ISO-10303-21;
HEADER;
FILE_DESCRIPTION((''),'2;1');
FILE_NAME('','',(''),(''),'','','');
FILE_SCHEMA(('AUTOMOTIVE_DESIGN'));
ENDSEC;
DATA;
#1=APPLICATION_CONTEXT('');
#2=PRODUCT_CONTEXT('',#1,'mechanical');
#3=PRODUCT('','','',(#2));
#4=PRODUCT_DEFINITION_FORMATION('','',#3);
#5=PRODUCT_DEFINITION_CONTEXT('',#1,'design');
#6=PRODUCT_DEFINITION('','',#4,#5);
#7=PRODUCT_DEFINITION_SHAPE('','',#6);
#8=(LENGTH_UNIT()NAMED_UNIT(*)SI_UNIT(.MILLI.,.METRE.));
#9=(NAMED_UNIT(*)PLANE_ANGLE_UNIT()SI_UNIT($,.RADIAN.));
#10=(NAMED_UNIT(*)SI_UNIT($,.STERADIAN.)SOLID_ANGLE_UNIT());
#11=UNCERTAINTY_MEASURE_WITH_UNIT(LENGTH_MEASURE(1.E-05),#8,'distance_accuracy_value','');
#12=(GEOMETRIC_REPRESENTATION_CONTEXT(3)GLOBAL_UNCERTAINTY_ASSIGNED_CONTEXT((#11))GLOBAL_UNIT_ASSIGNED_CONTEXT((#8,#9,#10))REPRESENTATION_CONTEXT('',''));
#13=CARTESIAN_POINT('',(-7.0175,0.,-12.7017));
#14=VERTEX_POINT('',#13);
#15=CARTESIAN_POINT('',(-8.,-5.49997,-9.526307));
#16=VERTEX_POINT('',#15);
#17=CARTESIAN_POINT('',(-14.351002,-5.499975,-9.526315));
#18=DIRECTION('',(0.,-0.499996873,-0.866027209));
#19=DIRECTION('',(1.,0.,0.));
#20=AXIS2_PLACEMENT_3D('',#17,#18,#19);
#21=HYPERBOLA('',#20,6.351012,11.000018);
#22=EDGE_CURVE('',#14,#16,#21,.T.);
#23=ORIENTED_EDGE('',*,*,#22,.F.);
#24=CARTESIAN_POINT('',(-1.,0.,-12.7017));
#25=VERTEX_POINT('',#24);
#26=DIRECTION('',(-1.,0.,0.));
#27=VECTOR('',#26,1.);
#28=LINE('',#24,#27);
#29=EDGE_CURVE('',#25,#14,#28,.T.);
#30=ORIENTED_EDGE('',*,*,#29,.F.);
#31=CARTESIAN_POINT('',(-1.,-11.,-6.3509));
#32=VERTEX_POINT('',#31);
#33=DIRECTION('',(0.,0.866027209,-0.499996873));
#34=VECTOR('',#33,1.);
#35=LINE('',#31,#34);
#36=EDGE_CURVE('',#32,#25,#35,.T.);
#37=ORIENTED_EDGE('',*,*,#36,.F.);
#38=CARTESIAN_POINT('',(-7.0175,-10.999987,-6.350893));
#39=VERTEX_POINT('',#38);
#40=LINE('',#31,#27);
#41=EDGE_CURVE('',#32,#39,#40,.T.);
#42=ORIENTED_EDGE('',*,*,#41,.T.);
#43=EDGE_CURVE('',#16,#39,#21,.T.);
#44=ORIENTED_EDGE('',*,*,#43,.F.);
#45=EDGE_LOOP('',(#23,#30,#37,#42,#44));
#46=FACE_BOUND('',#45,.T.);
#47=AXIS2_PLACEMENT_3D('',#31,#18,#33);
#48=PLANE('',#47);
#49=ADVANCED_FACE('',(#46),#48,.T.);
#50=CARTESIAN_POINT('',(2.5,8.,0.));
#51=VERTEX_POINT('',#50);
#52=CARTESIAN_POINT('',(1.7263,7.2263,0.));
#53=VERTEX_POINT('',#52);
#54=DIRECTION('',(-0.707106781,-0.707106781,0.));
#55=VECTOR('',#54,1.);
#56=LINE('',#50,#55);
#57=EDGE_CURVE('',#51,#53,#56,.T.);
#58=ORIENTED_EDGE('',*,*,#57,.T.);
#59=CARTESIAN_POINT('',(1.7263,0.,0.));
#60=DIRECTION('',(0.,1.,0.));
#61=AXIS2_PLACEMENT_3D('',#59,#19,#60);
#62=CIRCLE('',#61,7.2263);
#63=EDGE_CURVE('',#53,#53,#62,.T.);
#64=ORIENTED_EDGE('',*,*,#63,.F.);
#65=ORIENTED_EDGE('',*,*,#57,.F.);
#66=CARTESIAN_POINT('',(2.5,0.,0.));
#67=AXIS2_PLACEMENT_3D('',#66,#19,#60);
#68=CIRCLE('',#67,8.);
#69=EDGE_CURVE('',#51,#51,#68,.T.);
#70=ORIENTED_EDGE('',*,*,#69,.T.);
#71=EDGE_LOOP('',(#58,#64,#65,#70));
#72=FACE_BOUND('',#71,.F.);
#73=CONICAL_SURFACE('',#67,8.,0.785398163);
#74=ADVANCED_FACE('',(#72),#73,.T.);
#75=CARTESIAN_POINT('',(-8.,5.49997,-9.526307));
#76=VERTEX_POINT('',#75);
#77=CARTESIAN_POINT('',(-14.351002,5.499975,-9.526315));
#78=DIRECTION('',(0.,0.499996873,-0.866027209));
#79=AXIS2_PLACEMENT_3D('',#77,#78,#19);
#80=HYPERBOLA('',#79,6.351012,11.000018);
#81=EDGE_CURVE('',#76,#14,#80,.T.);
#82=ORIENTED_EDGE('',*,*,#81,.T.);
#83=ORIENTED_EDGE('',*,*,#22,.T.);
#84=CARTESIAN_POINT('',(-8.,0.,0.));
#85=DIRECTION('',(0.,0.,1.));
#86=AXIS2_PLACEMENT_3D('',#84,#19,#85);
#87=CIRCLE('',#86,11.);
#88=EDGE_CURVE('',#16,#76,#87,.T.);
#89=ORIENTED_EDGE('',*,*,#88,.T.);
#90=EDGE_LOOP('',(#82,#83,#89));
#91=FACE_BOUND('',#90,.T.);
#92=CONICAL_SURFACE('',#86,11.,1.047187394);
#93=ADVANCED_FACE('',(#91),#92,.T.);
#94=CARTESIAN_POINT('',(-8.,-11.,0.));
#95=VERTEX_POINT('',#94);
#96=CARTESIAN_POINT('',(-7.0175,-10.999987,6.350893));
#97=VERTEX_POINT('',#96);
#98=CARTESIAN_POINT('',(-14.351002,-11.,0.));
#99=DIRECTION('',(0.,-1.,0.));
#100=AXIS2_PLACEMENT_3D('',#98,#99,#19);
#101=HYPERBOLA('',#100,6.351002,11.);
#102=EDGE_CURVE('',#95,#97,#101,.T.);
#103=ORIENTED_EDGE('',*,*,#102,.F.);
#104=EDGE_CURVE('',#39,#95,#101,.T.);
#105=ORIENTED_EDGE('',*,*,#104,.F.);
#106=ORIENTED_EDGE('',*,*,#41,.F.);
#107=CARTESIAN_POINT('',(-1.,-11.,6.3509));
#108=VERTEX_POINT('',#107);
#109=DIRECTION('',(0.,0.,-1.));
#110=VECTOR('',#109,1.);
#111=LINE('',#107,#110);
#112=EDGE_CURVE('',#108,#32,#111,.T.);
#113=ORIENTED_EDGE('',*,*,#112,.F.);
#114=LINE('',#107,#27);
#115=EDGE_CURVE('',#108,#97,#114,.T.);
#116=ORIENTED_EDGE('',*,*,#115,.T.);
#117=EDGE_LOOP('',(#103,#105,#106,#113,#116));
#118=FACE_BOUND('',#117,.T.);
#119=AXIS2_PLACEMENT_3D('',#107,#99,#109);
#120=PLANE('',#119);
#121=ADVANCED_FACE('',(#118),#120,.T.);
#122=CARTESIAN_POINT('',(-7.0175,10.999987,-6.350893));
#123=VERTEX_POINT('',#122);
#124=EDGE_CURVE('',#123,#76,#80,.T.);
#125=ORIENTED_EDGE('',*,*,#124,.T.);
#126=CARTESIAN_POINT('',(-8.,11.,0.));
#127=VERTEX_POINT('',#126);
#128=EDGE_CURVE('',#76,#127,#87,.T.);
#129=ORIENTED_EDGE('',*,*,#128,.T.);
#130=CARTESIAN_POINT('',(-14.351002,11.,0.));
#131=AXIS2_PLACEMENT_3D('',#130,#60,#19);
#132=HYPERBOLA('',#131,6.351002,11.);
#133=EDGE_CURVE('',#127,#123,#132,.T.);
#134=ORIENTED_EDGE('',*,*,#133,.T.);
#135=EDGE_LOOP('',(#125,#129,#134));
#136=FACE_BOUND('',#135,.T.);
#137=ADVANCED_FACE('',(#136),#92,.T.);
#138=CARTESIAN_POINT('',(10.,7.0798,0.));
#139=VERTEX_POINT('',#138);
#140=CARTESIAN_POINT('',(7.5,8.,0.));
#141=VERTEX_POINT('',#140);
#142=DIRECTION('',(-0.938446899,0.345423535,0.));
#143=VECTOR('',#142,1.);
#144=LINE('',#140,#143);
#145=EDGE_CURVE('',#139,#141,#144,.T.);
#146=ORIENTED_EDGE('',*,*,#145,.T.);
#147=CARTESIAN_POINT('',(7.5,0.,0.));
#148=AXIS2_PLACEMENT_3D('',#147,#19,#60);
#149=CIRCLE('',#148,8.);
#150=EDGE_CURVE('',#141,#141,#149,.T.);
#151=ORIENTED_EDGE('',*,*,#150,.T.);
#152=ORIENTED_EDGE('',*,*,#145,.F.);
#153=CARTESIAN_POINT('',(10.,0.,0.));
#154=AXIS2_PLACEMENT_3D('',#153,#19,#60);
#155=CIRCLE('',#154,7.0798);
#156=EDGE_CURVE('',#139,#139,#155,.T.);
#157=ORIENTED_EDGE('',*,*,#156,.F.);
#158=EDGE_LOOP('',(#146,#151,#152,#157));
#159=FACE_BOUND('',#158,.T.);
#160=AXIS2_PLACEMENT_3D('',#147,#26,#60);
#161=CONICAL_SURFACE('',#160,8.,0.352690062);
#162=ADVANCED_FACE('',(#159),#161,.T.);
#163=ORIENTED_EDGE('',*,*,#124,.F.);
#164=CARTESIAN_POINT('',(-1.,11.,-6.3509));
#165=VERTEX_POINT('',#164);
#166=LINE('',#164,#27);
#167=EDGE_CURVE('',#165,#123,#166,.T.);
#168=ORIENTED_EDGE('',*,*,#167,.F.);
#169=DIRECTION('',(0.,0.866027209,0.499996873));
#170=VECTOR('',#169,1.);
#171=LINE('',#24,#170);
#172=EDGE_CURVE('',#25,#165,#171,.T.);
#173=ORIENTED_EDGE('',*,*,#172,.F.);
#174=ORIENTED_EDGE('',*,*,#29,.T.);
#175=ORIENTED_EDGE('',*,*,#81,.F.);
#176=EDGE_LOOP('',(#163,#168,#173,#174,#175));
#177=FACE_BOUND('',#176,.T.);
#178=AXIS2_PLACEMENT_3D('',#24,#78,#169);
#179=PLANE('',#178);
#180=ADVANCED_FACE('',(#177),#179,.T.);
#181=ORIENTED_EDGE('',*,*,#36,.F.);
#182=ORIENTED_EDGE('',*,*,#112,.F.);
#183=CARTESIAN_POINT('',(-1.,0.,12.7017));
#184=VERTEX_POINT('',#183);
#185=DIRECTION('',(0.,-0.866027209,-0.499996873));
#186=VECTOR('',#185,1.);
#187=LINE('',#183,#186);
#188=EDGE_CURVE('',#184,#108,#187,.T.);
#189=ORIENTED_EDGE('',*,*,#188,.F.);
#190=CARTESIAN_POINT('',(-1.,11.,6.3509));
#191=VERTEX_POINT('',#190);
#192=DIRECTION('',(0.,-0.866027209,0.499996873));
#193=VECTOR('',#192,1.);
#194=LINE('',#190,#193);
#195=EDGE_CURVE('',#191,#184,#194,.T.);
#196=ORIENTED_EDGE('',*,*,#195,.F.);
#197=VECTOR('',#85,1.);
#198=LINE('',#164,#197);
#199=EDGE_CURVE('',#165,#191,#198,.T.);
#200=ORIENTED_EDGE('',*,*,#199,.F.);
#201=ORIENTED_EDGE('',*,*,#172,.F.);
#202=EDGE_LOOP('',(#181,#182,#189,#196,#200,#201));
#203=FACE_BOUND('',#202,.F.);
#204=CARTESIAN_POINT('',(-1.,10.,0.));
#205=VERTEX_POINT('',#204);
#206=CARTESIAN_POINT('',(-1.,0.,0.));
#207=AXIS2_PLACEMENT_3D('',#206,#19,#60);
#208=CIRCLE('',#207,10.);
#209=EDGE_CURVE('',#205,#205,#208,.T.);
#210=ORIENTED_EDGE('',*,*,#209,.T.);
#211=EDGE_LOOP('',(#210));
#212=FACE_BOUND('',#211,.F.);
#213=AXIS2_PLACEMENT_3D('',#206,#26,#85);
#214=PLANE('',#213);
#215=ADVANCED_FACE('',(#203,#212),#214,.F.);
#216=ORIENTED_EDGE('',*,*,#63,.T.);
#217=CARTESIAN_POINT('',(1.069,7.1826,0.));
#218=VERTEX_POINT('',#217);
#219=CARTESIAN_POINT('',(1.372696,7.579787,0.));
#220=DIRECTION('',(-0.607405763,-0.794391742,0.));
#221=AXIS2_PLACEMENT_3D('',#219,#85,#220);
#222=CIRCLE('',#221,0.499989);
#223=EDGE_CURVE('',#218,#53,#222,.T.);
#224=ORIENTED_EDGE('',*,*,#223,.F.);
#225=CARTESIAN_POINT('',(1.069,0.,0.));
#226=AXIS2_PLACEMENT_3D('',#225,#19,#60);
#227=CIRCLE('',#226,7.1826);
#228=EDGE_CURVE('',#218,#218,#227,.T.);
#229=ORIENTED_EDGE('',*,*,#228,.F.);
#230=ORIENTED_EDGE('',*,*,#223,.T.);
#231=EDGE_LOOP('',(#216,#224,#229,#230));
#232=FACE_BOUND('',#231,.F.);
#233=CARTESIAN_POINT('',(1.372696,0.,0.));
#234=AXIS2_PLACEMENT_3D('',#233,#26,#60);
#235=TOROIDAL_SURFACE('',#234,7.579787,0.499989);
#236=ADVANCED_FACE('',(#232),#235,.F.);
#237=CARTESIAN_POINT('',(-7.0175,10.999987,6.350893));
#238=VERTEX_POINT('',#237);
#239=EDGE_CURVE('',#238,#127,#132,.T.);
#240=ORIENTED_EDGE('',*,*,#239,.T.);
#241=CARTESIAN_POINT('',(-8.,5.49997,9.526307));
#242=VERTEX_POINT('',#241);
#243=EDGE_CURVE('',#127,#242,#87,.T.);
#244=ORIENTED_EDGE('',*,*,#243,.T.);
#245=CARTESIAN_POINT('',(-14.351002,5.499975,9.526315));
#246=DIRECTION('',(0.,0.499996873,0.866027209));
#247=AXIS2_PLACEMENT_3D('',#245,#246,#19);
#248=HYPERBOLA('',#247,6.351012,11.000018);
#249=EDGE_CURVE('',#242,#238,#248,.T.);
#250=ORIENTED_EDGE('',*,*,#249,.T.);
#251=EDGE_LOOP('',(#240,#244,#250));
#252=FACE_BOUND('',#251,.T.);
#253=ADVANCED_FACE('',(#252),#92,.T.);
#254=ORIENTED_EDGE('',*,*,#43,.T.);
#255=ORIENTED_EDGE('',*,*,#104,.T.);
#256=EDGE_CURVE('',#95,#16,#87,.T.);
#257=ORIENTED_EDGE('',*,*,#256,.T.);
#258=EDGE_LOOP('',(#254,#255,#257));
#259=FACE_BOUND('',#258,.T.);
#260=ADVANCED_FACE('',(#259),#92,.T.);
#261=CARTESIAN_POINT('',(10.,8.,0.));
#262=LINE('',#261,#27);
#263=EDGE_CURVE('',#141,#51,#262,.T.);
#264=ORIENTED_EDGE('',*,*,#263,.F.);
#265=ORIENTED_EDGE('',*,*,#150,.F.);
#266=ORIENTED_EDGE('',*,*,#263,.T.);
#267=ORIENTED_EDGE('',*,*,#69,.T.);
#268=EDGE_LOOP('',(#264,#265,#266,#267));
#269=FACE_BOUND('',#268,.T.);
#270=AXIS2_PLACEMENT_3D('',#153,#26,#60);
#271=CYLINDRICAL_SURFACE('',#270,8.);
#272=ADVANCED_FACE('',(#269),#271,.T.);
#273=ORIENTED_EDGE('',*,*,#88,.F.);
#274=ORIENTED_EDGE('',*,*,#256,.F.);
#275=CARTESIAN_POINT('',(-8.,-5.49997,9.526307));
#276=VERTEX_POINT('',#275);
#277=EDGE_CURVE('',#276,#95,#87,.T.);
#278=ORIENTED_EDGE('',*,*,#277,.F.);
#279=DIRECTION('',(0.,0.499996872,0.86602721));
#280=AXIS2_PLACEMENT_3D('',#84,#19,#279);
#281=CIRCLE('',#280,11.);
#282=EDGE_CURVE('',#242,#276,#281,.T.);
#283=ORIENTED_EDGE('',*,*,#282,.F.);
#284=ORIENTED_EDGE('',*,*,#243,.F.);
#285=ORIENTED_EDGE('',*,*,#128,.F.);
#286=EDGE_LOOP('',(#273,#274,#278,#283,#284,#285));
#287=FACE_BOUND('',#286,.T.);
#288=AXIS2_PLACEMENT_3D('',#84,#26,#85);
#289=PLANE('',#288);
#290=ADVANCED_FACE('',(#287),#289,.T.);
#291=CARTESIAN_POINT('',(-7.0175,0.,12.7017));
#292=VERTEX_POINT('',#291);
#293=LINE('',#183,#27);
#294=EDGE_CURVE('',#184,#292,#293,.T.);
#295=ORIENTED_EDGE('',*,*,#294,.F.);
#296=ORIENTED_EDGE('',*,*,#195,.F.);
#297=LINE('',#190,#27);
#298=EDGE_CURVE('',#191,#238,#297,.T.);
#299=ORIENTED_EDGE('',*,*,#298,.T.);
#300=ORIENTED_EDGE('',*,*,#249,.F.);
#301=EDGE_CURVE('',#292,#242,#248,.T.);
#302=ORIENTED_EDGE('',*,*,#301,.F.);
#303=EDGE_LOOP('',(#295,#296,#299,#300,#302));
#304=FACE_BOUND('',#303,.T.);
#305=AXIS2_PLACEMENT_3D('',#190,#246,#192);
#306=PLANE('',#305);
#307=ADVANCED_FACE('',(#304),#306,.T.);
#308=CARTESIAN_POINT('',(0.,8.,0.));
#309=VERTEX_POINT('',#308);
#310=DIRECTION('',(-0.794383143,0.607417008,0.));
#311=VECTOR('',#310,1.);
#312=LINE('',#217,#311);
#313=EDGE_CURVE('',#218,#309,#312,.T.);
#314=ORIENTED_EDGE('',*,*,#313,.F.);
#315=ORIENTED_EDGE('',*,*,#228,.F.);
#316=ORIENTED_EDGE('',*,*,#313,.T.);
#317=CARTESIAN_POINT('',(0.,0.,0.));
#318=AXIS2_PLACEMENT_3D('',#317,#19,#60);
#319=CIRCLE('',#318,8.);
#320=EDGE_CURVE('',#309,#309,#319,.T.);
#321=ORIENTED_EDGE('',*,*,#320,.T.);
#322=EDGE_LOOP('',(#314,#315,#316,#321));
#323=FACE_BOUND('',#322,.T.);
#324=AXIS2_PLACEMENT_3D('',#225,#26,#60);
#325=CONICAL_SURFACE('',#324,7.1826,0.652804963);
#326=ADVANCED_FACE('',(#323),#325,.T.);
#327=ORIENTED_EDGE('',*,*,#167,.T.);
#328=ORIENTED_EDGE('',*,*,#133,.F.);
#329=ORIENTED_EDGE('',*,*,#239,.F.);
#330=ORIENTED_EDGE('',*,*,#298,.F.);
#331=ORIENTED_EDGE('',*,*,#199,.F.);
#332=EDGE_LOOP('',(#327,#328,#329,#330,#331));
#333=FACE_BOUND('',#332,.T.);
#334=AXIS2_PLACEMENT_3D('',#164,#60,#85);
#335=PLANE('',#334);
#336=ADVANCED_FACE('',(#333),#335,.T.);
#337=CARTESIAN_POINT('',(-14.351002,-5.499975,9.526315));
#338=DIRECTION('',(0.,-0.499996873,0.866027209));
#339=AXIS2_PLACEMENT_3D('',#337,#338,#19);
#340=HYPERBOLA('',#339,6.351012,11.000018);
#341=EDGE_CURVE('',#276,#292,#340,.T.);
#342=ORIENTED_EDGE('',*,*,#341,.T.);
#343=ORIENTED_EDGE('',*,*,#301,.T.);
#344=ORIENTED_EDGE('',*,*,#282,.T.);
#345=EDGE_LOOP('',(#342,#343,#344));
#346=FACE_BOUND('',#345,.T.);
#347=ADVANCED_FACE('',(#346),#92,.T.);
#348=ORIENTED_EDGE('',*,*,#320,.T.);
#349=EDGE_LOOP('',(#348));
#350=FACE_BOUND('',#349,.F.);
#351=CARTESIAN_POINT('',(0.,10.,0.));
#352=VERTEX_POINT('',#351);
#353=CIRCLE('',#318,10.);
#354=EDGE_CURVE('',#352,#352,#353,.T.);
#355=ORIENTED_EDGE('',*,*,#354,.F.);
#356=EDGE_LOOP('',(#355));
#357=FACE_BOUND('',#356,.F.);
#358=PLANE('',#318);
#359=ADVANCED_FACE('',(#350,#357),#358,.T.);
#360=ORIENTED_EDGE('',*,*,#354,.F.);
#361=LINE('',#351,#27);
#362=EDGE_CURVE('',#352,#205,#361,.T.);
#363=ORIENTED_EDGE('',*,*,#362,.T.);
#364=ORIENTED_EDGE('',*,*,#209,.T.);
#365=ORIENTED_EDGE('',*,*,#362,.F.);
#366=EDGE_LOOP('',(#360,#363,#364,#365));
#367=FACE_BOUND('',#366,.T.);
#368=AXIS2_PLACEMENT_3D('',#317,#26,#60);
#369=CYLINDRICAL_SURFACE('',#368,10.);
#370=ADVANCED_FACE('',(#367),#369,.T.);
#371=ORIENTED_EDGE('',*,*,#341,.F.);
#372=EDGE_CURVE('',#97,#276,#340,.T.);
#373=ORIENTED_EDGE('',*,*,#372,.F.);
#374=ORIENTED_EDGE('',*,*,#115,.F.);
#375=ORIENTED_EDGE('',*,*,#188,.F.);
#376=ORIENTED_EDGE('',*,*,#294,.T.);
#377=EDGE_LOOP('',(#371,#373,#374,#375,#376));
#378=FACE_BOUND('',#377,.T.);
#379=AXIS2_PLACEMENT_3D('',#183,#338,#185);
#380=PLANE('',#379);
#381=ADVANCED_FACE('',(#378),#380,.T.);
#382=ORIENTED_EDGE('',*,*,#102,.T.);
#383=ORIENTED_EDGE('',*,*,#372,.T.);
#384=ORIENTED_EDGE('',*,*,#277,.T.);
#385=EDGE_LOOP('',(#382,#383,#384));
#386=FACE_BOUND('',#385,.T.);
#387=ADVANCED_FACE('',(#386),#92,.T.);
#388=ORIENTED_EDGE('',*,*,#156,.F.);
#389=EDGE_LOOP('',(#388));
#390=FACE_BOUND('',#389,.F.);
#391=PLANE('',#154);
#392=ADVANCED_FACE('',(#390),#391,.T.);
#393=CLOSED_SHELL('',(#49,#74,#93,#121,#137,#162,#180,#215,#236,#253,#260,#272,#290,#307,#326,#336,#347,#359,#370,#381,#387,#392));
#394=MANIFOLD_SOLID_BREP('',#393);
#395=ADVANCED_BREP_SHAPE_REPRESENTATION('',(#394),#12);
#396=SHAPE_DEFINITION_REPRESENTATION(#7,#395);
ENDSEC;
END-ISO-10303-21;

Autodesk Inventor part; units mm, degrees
ref_plane "YZ Plane" through (0, 0, 0) normal (1, 0, 0) x (0, 1, 0)
ref_plane "XZ Plane" through (0, 0, 0) normal (0, 1, 0) x (-1, 0, 0)
sketch "草图1" plane through (0, 0, 0) normal (0, 0, 1) x (1, 0, 0)
  line L0 (-1, 0) -> (10, 0)
  line L1 (10, 0) -> (10, 8)
  line L2 (10, 8) -> (0, 8)
  line L3 (0, 8) -> (0, 10)
  line L4 (0, 10) -> (-1, 10)
  line L5 (-1, 10) -> (-1, 0)
  line L6 (-3.2, 0) -> (12.2, 0) projected
  line L7 (0, -2) -> (0, 12) projected
  line L8 (0, 7.0798) -> (9.9654, 7.0798) construction
  line L9 (2.5, 8) -> (1.7263, 7.2263)
  line L10 (1.069, 7.1826) -> (0, 8)
  arc A0 (1.069, 7.1826) -> (1.7263, 7.2263) centre (1.3727, 7.5798) ccw
  dimension "d0" = 16
  dimension "d1" = 10
  dimension "d2" = 1
  dimension "d3" = 20
  dimension "d5" = 14.1596
  dimension "d6" = 0.5
  dimension "d7" = 45
  dimension "d8" = 2.5
revolve "轴承体" add sketch "草图1" angle 360 about axis through (-1, 0, 0) along (1, 0, 0)
sketch "草图2" plane through (-1, 0, 0) normal (-1, 0, 0) x (0, 0, 1)
  circle A0 centre (0, 0) radius 10 projected
  line L0 (6.3509, 11) -> (12.7017, 0)
  line L1 (12.7017, 0) -> (6.3509, -11)
  line L2 (6.3509, -11) -> (-6.3509, -11)
  line L3 (-6.3509, -11) -> (-12.7017, 0)
  line L4 (-12.7017, 0) -> (-6.3509, 11)
  line L5 (-6.3509, 11) -> (6.3509, 11)
  dimension "d11" = 22
extrude "头" add sketch "草图2" along normal blind 7 contours A0 | L0 L1 L2 L3 L4 L5
revolve "沟槽1" cut sketch "草图1" angle 360 about axis through (-1, 0, 0) along (1, 0, 0) contours L2 L9 A0 L10
sketch "草图3" plane through (0, 0, 0) normal (0, 1, 0) x (-1, 0, 0)
  line L0 (7.0175, 12.7017) -> (8, 12.7017)
  line L1 (8, 12.7017) -> (8, 11)
  line L2 (8, 11) -> (7.0175, 12.7017)
  line L3 (9.4, 0) -> (-0.4, 0) projected
  line L4 (1, 12.7017) -> (8, 12.7017) projected
  line L5 (8, 6.3509) -> (8, 12.7017) projected
  dimension "d14" = 30
  dimension "d15" = 11
revolve "倒角2" cut sketch "草图3" angle 360 about axis through (-10, 0, 0) along (1, 0, 0)
thread "螺纹" size "M16x1.5" class "6g" standard "ISO Metric profile" length 10
chamfer "倒角1" distance 0.9202 distance2 2.5 1 edges at (10, -8, 0) measured on face at (10, -0.1598, -1.3157)
ref_plane "Work Plane1" through (5, 0, 0) normal (0, 0.5, 0.8660254) x (1, 0, 0)
equation "\"d11\" = SW"
equation "\"d12\" = KOH"
equation "\"d0\" = NND"
equation "\"d1\" = NLG"
equation "\"d2\" = SD"
equation "\"d3\" = SD2"
equation "\"d5\" = GD1"
equation "\"d6\" = 0.2 * GAL1"
equation "\"d8\" = GAL1"
equation "\"d17\" = GEL"
equation "\"d9\" = -0.5 * GD1 + 0.5 * NND"
equation "\"d10\" = GAL1"
equation "\"d15\" = 0.5 * SW"
equation "\"NND\" = 16"
equation "\"NLG\" = 10"
equation "\"GAL1\" = 2.5"
equation "\"SD\" = 1"
equation "\"SD2\" = 20"
equation "\"GD1\" = THREADDIA - 1.2269 * PTC"
equation "\"SW\" = 22"
equation "\"KOH\" = 7"
equation "\"GEL\" = NLG"
equation "\"GUL\" = 0.61345 * PTC"
equation "\"PHH\" = 0.8"
equation "\"RR\" = 1"
equation "\"THREADDIA\" = 16"
equation "\"TOA\" = 30deg"
equation "\"PTC\" = 1.5"
equation "\"GAL\" = 0.61345 * PTC"
equation "\"E0\" = 25.4"
properties part number "CSN 02 1915.11 - M16 x 1.5 x 10" material "钢，软"
